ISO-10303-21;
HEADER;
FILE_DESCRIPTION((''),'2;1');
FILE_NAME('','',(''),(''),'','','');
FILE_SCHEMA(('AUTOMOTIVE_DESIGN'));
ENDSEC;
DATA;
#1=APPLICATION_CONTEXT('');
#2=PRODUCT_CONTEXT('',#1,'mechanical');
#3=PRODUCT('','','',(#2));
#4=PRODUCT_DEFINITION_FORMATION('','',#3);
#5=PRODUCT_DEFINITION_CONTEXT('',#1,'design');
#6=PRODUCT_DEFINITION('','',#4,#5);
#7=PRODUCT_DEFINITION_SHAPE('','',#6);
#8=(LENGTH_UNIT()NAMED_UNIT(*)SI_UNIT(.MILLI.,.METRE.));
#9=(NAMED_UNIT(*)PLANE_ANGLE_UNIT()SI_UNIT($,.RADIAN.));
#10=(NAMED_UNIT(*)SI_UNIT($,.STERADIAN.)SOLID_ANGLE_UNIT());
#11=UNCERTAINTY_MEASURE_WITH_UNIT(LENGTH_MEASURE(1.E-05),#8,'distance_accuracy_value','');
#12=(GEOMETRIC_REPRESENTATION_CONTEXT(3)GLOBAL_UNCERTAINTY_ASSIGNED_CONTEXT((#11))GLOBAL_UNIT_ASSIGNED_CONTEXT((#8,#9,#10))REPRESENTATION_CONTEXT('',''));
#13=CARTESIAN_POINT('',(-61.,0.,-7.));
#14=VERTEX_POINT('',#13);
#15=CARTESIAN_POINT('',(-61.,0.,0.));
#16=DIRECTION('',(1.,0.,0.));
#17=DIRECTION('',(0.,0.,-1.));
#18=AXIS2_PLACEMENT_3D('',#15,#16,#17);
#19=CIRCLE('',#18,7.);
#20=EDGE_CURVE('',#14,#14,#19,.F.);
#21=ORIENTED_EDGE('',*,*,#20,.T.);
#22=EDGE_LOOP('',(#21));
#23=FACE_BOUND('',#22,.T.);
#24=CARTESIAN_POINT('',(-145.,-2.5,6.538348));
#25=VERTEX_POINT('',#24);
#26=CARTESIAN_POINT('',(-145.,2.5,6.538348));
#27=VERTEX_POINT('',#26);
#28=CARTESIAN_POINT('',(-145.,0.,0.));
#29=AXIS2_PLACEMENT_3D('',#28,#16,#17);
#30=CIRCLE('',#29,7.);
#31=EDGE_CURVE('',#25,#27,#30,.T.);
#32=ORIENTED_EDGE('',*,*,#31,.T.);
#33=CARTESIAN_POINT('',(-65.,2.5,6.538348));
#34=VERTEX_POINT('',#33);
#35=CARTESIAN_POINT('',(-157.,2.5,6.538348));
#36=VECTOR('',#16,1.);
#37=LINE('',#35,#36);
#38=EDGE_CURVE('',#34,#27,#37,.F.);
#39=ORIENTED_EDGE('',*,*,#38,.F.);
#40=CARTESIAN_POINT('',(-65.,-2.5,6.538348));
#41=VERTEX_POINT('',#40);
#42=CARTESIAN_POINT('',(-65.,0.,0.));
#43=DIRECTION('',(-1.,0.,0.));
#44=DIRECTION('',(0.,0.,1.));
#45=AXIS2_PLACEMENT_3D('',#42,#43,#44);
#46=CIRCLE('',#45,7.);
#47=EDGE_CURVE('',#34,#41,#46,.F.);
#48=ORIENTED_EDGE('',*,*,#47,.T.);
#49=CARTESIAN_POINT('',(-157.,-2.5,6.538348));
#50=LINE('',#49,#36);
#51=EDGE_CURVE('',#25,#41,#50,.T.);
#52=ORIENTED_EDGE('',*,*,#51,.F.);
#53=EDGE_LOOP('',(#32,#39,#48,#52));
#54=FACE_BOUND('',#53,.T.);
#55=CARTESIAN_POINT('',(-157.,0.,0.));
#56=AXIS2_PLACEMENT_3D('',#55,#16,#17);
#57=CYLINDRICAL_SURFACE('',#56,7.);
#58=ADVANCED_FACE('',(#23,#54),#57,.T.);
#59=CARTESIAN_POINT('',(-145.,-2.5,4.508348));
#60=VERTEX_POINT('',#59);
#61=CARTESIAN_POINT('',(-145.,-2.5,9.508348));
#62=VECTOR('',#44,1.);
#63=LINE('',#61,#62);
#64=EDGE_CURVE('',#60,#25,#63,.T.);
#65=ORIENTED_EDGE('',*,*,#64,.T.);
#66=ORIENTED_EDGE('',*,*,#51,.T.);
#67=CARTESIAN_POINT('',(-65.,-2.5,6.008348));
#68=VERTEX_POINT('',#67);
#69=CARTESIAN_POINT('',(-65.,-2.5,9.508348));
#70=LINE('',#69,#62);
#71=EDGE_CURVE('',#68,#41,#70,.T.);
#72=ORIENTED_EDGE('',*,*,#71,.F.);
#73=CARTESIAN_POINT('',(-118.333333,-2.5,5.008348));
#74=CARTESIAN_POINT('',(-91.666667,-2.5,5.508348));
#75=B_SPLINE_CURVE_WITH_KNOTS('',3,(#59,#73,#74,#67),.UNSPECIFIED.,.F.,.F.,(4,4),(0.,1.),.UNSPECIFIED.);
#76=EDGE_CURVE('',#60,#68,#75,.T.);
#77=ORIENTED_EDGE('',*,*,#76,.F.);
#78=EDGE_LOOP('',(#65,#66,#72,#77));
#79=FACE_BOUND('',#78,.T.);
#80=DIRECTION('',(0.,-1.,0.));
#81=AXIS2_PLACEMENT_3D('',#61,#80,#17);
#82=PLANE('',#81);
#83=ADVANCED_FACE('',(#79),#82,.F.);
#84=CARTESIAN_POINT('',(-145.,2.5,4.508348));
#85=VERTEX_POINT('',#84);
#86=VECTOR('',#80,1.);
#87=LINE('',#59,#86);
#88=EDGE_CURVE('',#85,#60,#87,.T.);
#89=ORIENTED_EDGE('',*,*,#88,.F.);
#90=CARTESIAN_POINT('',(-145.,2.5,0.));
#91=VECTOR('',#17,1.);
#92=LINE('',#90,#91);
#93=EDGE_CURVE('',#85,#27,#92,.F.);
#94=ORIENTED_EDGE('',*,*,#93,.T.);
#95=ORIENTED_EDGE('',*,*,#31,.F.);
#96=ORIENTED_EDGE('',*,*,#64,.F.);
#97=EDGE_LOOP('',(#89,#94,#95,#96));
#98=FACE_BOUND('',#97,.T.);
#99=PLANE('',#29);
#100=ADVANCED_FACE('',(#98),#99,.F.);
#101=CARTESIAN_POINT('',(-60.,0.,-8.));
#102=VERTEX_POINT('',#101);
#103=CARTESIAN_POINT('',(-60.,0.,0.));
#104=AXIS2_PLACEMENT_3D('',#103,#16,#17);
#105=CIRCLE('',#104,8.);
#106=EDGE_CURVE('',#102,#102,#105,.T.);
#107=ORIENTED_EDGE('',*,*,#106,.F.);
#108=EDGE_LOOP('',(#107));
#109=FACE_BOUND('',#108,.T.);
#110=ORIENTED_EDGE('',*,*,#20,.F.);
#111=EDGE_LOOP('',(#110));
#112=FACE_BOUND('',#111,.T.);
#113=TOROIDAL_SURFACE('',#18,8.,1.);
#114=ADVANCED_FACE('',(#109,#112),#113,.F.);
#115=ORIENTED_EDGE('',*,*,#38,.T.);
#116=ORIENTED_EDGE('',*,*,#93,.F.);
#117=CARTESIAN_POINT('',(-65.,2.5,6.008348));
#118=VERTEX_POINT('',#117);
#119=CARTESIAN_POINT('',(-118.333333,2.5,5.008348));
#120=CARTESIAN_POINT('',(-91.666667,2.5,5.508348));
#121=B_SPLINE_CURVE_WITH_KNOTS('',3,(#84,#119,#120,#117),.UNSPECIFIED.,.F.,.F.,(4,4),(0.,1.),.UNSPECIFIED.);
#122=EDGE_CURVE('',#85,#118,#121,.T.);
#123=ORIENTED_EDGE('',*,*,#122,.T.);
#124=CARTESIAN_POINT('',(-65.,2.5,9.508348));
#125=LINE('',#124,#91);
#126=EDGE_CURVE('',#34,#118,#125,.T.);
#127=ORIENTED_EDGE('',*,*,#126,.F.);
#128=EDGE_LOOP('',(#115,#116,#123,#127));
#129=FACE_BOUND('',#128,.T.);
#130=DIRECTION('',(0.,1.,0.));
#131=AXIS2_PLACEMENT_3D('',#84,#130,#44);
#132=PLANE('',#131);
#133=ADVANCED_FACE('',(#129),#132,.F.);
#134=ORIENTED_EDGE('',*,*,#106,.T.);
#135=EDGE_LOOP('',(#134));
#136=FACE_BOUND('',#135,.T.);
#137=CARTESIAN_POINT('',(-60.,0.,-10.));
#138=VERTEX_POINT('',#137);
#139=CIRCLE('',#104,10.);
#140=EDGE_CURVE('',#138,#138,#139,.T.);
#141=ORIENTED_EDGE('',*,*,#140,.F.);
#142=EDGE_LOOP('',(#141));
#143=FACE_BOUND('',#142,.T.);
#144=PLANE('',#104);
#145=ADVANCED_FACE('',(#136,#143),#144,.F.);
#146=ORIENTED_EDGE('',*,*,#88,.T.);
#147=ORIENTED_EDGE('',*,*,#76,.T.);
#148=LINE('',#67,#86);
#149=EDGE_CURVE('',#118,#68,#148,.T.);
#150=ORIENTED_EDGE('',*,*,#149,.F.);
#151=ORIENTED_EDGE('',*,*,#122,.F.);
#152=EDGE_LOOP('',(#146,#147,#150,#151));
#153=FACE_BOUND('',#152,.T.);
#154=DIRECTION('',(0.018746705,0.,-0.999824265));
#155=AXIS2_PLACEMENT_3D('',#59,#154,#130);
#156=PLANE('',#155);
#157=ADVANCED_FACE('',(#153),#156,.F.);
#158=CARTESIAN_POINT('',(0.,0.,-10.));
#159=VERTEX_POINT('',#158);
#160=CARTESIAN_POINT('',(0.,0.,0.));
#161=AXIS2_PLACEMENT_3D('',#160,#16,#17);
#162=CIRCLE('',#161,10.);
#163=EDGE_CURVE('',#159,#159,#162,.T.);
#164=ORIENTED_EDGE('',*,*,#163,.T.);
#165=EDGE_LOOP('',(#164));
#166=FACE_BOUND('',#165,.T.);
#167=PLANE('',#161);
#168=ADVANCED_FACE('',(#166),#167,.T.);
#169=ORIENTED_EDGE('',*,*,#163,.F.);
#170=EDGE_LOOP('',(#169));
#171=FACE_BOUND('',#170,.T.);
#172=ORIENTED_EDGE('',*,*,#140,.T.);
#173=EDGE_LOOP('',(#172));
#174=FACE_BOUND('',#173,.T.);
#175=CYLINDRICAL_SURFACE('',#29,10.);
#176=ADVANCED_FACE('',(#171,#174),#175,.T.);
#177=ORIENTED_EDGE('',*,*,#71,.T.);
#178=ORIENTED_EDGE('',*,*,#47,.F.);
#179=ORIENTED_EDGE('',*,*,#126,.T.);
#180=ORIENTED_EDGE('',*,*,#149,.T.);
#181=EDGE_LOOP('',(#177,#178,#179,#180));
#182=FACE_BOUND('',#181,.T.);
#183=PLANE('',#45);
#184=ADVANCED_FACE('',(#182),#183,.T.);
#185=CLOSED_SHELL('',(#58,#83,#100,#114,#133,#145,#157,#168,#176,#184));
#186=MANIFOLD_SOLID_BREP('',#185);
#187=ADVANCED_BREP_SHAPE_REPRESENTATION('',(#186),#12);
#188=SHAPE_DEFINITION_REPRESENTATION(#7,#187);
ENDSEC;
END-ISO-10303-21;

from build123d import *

# Parameters (mm, degrees)
SKETCH1_R           = 10
BOSS_EXTRUDE1_DEPTH = 145
SKETCH2_R           = 10
SKETCH2_R_2         = 7
CUT_EXTRUDE1_DEPTH  = 97
FILLET1_R           = 1
CUT_LOFT1_START     = -2.5
CUT_LOFT1_DEPTH     = 5


# Read off the part's stored shape, not the designer's step: Cut-Loft1
with BuildPart() as part:
    # Sketch1 → Boss-Extrude1 (new body)
    with BuildSketch(Plane(origin=(0, 0, 0), x_dir=(0, 0, -1), z_dir=(1, 0, 0))):
        Circle(SKETCH1_R)
    extrude(amount=-BOSS_EXTRUDE1_DEPTH)

    # Sketch2 → Cut-Extrude1 (cut)
    with BuildSketch(Plane(origin=(-60, 0, 0), x_dir=(0, 0, -1), z_dir=(1, 0, 0))):
        Circle(SKETCH2_R)
        Circle(SKETCH2_R_2, mode=Mode.SUBTRACT)
    extrude(amount=-CUT_EXTRUDE1_DEPTH, mode=Mode.SUBTRACT)

    # Fillet1
    fillet1_edges = [part.edges().sort_by_distance(p)[0] for p in [
        (-60, 0, 7),
    ]]
    fillet(fillet1_edges, radius=FILLET1_R)

    # Cut-Loft1 outline → Cut-Loft1 (cut)
    with BuildSketch(Plane(origin=(0, 0, 0), x_dir=(1, 0, 0), z_dir=(0, 1, 0)).offset(CUT_LOFT1_START)):
        Polygon((-65, -8), (-65, -6.008348415), (-145, -4.508348415), (-145, -8), align=None)
    extrude(amount=CUT_LOFT1_DEPTH, mode=Mode.SUBTRACT)


solid = part.part
